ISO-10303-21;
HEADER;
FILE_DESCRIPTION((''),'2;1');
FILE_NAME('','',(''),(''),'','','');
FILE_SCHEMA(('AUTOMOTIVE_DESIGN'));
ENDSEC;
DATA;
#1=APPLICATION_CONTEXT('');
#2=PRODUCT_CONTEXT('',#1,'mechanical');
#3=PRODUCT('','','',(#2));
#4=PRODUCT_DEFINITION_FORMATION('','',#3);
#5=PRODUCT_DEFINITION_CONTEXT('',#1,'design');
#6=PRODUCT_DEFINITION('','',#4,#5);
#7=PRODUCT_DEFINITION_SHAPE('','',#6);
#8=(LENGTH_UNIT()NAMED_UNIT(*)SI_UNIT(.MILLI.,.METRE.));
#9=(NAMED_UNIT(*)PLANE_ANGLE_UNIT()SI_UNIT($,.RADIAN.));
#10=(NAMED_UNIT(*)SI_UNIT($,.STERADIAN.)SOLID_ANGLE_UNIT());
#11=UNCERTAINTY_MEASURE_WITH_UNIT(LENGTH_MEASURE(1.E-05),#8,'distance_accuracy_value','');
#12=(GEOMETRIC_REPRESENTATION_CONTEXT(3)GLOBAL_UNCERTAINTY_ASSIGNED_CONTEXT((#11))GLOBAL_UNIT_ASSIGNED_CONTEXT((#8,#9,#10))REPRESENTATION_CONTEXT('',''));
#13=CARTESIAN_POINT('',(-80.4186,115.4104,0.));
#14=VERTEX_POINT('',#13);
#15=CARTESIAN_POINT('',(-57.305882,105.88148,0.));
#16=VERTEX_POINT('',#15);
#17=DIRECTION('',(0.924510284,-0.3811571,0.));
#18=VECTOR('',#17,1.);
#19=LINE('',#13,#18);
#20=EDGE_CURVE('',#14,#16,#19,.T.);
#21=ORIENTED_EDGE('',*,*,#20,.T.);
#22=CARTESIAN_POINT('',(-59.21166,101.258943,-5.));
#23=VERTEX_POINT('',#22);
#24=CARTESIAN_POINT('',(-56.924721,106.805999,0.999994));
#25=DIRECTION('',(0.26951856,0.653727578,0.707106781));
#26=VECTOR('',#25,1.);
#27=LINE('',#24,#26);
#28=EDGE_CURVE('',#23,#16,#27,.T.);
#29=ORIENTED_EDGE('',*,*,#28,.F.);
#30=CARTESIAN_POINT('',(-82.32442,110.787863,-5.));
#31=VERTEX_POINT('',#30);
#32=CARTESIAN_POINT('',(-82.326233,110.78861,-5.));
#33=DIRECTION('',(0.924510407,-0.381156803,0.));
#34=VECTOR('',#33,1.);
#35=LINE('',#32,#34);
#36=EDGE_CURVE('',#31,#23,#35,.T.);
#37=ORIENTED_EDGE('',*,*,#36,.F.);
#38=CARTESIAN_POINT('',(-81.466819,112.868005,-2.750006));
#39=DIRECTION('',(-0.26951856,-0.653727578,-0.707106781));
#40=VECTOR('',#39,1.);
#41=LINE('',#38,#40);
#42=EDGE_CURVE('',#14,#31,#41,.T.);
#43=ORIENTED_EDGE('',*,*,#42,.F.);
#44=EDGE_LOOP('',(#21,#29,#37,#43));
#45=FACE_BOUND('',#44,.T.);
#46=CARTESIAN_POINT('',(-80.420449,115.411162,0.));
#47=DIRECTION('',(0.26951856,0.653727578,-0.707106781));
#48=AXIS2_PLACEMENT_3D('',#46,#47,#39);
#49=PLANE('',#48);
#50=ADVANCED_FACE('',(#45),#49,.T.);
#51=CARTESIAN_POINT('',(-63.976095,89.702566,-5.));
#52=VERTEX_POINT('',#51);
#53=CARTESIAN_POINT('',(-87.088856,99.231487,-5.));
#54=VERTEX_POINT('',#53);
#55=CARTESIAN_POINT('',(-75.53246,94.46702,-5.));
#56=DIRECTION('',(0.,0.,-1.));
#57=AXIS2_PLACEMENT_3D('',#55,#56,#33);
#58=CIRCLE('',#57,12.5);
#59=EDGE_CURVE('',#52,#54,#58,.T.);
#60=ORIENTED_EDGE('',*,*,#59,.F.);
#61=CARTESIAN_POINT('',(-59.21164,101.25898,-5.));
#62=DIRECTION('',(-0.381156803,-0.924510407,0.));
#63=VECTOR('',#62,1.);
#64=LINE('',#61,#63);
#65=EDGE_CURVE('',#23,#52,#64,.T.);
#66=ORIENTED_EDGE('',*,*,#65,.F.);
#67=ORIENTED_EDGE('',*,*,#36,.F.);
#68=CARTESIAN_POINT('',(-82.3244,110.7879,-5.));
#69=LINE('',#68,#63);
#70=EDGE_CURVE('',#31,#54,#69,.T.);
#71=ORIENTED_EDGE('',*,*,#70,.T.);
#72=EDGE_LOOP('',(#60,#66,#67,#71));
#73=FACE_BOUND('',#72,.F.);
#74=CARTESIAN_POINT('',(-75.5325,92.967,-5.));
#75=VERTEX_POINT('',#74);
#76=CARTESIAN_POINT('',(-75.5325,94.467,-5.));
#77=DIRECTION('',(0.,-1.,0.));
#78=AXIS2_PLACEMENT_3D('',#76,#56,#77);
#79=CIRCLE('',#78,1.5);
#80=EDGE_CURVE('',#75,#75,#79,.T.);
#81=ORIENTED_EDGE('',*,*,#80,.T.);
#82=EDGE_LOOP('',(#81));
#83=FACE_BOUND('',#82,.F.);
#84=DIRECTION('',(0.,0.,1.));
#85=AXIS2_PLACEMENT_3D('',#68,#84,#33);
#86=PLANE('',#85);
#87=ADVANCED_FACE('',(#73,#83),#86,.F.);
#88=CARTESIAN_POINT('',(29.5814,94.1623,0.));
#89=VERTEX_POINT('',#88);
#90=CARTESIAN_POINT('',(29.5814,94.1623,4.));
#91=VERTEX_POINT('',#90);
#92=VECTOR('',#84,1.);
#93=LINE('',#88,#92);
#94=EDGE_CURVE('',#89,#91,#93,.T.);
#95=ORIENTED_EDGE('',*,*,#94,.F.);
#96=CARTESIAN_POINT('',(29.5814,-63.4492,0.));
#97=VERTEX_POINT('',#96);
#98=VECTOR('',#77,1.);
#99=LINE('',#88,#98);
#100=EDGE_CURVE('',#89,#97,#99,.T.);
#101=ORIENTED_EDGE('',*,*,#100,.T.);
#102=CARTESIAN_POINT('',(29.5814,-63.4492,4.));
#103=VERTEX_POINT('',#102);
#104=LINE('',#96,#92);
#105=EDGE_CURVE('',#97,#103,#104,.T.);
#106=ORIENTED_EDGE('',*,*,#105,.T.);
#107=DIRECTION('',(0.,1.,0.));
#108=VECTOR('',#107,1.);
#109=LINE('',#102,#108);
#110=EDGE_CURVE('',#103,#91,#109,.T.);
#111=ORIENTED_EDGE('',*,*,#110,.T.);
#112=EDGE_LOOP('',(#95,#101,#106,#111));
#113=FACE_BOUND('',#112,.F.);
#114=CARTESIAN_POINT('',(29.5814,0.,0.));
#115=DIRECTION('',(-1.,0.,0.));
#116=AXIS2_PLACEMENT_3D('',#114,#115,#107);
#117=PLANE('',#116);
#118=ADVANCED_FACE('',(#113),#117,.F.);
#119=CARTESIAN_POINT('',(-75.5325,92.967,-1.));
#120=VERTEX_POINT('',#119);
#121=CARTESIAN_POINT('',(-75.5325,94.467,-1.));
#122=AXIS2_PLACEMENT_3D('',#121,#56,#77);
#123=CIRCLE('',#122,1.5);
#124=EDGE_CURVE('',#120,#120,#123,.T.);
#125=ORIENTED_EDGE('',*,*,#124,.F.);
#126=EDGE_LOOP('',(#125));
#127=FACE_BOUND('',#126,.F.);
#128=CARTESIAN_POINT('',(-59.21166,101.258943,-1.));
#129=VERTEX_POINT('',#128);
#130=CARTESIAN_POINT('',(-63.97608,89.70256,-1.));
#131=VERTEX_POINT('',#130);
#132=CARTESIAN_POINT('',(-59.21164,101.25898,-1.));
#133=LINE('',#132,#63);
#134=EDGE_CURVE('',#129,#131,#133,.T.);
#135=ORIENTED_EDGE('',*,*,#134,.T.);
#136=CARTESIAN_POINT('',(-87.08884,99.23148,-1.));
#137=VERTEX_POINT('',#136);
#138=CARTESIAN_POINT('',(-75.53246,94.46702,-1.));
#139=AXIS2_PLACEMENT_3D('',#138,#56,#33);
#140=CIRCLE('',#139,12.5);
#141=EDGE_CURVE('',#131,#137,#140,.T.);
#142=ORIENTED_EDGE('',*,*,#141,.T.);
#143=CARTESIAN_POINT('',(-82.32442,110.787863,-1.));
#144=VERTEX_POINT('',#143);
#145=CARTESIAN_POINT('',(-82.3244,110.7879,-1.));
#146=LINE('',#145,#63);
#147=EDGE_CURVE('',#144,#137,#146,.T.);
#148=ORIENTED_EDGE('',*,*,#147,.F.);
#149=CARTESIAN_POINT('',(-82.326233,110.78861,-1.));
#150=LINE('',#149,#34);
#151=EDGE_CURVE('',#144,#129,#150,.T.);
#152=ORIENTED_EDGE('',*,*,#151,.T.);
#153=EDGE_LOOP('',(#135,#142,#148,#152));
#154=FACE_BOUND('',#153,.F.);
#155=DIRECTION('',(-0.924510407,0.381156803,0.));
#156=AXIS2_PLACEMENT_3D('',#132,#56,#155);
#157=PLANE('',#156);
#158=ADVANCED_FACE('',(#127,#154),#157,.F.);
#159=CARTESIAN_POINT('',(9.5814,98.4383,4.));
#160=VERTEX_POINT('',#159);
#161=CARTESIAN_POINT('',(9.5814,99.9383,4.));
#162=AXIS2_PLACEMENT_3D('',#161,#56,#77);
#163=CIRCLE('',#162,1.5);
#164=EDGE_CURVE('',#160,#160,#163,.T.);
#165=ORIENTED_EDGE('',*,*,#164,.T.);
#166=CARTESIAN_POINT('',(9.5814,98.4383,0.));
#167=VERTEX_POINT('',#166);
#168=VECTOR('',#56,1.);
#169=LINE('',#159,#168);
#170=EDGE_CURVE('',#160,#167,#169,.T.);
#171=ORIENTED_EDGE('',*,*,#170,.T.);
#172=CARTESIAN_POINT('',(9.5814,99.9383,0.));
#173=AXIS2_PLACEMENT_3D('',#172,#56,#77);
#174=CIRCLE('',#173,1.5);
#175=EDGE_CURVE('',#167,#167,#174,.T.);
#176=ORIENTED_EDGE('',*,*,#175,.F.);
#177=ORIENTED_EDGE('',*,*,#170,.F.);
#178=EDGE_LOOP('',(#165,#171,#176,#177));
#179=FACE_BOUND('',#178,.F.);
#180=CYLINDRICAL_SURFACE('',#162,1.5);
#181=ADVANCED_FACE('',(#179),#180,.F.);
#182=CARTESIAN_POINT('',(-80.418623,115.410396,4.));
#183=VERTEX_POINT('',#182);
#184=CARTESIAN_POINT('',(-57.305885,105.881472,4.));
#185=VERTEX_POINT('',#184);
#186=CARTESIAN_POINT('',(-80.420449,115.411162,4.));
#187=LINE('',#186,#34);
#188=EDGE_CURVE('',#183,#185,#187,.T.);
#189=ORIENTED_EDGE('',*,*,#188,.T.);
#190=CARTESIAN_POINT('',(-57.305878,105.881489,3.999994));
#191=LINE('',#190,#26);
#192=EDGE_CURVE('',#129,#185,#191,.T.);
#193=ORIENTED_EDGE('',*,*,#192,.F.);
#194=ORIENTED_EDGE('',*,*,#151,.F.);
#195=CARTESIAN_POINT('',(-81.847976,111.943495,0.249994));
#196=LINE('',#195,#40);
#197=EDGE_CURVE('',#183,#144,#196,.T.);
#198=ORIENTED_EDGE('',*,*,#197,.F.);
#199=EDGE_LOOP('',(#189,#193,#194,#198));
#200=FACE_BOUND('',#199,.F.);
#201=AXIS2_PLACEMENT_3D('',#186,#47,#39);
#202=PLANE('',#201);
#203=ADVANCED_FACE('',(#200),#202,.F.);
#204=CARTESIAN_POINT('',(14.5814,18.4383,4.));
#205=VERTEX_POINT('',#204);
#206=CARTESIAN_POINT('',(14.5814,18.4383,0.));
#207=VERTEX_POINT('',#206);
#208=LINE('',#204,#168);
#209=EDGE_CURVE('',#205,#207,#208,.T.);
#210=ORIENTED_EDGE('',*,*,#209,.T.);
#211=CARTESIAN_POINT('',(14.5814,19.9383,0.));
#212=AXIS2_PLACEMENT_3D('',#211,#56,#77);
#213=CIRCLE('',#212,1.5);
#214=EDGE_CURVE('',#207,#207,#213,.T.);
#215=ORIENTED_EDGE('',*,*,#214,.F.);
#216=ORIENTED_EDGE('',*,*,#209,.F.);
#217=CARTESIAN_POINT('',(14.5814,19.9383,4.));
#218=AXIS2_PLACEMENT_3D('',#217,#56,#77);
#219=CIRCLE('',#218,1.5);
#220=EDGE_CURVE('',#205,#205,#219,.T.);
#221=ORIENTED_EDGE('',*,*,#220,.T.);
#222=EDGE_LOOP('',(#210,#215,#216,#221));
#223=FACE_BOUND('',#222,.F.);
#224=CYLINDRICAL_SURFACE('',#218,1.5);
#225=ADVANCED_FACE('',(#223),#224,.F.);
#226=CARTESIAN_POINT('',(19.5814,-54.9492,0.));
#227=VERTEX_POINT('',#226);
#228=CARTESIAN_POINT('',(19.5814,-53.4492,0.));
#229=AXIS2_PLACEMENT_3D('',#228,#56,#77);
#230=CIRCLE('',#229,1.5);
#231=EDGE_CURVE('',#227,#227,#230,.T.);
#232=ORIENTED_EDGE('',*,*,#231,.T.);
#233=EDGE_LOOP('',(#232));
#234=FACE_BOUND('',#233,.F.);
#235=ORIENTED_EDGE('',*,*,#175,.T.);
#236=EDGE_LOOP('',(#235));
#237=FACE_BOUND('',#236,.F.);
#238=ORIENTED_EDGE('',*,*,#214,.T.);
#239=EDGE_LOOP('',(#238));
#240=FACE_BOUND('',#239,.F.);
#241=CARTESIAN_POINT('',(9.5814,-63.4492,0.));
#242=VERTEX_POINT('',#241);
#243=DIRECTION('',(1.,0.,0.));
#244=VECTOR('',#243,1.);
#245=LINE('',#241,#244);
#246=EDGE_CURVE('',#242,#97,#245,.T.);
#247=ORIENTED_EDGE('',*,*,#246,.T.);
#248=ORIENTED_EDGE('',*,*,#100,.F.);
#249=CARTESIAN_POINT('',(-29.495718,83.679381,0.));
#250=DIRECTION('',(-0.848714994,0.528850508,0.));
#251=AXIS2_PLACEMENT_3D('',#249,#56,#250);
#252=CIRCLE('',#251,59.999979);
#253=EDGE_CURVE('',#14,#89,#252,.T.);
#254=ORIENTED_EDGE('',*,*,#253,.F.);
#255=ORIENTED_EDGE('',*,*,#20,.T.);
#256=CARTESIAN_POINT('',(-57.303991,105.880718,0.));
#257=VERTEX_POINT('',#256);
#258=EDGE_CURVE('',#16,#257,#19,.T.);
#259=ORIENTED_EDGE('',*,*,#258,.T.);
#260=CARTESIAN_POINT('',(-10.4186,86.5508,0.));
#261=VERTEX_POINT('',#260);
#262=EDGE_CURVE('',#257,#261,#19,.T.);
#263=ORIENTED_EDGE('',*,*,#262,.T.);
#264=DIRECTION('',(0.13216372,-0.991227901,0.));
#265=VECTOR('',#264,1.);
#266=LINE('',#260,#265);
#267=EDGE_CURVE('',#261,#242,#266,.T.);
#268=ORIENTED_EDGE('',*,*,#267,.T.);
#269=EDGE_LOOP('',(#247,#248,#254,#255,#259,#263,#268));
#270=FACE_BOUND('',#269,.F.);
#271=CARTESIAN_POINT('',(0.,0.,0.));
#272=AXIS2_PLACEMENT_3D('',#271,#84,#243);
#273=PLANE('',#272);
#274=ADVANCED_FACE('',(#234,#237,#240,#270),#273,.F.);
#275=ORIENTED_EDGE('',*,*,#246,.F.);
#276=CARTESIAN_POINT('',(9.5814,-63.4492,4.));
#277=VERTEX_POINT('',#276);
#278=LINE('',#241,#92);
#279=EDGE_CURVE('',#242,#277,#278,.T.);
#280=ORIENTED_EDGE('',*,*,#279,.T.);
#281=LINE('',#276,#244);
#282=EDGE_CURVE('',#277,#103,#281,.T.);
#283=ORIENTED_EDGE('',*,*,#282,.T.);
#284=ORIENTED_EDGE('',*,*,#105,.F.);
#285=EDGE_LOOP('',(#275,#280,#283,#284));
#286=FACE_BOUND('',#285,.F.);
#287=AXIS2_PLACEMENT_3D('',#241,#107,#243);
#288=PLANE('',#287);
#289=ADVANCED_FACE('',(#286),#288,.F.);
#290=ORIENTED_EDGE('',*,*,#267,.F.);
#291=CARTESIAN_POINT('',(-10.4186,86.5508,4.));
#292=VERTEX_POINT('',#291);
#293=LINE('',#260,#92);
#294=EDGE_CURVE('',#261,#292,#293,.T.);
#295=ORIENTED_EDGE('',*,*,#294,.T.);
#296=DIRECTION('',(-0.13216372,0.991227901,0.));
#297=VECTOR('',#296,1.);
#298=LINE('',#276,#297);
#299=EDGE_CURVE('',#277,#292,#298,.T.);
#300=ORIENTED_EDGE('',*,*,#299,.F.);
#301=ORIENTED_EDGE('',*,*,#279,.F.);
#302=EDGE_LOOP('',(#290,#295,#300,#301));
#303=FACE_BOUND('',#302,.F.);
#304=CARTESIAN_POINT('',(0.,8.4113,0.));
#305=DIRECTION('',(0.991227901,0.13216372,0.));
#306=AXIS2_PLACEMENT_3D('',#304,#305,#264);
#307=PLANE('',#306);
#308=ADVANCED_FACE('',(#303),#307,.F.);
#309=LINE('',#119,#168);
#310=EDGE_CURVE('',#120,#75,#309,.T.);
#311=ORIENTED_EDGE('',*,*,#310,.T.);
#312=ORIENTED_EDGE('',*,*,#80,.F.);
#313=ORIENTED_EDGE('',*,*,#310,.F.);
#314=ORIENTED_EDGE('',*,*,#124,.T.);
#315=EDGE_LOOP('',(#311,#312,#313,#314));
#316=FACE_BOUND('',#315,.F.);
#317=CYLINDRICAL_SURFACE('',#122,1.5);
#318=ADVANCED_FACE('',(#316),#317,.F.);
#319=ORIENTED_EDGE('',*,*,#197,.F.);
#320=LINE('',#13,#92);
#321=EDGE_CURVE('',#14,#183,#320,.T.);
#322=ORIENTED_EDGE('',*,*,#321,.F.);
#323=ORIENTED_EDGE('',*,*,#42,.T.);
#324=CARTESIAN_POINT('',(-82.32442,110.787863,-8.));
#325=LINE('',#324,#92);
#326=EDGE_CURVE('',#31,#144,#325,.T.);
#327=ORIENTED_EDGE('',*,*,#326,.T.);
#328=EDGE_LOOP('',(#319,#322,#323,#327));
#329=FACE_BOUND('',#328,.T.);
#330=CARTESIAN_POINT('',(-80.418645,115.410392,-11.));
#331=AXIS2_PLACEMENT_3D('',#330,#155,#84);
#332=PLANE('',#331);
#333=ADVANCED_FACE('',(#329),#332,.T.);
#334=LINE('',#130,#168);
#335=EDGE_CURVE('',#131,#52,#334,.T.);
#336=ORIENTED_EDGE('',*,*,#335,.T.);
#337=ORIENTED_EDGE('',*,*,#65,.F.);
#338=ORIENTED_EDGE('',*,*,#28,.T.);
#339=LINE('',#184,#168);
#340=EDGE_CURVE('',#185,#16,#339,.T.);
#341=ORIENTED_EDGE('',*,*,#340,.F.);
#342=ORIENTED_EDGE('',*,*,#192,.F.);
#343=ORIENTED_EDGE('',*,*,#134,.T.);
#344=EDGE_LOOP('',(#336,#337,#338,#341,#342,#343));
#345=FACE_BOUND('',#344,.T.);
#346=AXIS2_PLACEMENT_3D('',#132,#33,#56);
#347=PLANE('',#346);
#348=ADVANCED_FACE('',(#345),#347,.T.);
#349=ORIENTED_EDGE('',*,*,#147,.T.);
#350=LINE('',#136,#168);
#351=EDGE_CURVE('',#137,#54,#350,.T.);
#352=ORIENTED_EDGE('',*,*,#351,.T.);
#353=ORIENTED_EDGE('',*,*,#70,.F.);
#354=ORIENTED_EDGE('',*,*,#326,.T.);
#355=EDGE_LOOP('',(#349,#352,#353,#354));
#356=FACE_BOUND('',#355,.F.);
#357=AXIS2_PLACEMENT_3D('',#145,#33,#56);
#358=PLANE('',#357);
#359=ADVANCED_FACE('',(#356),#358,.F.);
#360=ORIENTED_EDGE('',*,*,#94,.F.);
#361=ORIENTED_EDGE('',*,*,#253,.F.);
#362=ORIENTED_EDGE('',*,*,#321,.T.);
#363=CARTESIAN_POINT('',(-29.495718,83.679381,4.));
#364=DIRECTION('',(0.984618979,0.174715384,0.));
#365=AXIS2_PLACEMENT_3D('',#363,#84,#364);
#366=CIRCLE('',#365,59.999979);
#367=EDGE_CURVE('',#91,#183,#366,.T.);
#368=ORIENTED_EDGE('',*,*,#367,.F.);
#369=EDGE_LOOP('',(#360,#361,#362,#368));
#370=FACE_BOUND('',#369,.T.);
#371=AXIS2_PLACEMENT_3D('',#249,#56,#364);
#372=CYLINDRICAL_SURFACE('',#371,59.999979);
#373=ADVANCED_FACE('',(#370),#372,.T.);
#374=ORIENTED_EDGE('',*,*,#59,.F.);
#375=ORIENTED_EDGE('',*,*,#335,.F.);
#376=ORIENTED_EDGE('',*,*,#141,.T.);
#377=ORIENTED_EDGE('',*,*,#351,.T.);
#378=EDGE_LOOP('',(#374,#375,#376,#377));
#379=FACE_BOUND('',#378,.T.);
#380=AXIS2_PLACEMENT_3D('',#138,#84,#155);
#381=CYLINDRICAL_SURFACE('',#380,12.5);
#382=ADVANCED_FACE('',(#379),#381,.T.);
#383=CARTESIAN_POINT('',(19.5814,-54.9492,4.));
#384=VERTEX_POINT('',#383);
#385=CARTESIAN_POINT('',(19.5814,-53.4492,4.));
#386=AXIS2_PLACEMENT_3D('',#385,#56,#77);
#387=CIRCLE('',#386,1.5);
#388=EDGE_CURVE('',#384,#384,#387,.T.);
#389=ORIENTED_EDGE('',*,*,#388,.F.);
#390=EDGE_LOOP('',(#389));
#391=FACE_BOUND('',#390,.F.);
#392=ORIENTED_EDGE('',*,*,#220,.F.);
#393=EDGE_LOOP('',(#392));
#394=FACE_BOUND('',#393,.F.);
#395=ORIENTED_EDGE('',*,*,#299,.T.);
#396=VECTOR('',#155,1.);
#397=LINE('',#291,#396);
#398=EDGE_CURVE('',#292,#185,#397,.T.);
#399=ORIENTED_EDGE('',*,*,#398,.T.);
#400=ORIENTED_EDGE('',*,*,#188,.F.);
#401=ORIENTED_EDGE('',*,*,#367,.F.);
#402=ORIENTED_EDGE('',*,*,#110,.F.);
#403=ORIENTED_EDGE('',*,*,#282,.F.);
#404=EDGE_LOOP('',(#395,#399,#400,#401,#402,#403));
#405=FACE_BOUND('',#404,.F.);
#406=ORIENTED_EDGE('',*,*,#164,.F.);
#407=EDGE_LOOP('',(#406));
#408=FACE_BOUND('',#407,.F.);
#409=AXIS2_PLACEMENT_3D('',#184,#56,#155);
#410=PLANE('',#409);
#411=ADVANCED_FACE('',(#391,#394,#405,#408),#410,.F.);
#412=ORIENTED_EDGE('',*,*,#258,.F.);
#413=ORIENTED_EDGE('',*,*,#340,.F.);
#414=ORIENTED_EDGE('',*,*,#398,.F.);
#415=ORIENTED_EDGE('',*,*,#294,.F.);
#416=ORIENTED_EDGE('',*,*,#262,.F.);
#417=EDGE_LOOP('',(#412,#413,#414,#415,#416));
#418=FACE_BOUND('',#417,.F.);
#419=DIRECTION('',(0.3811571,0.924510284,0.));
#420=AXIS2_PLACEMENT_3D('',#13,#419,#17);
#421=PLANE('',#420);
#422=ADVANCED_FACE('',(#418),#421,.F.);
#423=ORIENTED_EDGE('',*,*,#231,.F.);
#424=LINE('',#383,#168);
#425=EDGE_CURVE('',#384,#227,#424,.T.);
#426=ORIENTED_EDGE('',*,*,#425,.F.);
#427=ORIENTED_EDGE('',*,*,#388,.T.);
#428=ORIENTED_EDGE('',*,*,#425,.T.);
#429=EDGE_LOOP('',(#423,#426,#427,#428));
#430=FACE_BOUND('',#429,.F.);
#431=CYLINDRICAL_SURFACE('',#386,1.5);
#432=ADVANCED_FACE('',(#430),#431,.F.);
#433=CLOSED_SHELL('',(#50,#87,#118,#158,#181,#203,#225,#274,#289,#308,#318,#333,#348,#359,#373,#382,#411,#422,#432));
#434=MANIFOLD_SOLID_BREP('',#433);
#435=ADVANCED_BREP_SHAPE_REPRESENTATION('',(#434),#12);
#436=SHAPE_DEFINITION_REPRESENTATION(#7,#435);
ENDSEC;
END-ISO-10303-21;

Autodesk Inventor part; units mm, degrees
ref_plane "YZ Plane" through (0, 0, 0) normal (1, 0, 0) x (0, 1, 0)
ref_plane "XZ Plane" through (0, 0, 0) normal (0, 1, 0) x (-1, 0, 0)
ref_plane "XY Plane" through (0, 0, 0) normal (0, 0, 1) x (1, 0, 0)
sketch "Skizze1" plane through (0, 0, 0) normal (0, 0, 1) x (1, 0, 0)
  line L0 (-103.8791, 0) -> (60.3442, 0) projected
  line L1 (0, -106.7819) -> (0, 196.5471) projected
  line L2 (29.5814, -63.4492) -> (29.5814, 94.1623)
  arc A0 (29.5814, 94.1623) -> (-80.4186, 115.4104) centre (-29.4958, 83.6793) ccw
  line L3 (-80.4186, 115.4104) -> (-10.4186, 86.5508)
  line L4 (-10.4186, 86.5508) -> (9.5814, -63.4492)
  line L5 (9.5814, -63.4492) -> (29.5814, -63.4492)
  point P0 (0, 0)
  point P1 (-57.3059, 105.8815)
  dimension "d0" = 120
  dimension "d2" = 20
  dimension "d3" = 40
  dimension "d4" = 120
  dimension "d6" = 150
  dimension "d24" = 70
extrude "Extrusion1" add sketch "Skizze1" along normal blind 4 contours L4 L1 A0 L2 L0 | L0 L2 L5 L4 | L4 L3 A0 L1
sketch "Skizze2" plane through (0, 0, 4) normal (0, 0, 1) x (1, 0, 0)
  arc A0 (-82.3244, 110.7879) -> (-59.2117, 101.2589) centre (-70.768, 106.0234) ccw projected
  line L0 (29.5814, -63.4492) -> (29.5814, 94.1623) projected
  line L1 (9.5814, -63.4492) -> (29.5814, -63.4492) projected
  point P0 (0, 0)
  point P1 (19.5814, -53.4492)
  dimension "d15" = 10
  dimension "d16" = 10
hole "Bohrung1" at (19.5814, -53.4492, 4) direction (0, 0, -1) diameter 3 end through all
sketch "Skizze3" plane through (-10.4186, 86.5508, 0) normal (-0.3811568, -0.9245104, 0) x (0.9245104, -0.3811568, 0)
  line L0 (34.0793, 4) -> (-75.7158, 4) projected
  line L1 (-75.7158, 4) -> (-50.7158, 4)
  line L2 (-50.7158, 4) -> (-50.7158, -11)
  line L3 (-50.7158, -11) -> (-75.7158, -11)
  line L4 (-75.7158, -11) -> (-75.7158, 4)
  point P0 (42.6216, 0)
  dimension "d25" = 15
  dimension "d26" = 25
extrude "Extrusion2" add sketch "Skizze3" along normal blind 10
sketch "Skizze4" plane through (-80.4186, 115.4104, -11) normal (-0.9245104, 0.3811568, 0) x (0, 0, 1)
  line L0 (11, 0) -> (11, 50.0739) projected
  line L1 (0, 0) -> (0, -10) projected
  line L2 (11, 0) -> (0, 0) projected
  line L3 (11, 0) -> (15, 0) projected
  line L4 (0, -10) -> (15, -10) projected
  line L5 (11, 0) -> (6, -5)
  line L6 (15, 0) -> (15, -10) projected
  line L7 (15, 0) -> (10, -5)
  line L8 (6, -5) -> (10, -5)
  point P0 (11, -76.046)
  point P1 (11, 22.2831)
  dimension "d30" = 5
  dimension "d31" = 5
  dimension "d32" = 45
extrude "Extrusion3" cut sketch "Skizze4" against normal blind 25 contours L2 L5 L8 L7 L6 L4 L1
sketch "Skizze5" plane through (-82.3244, 110.7879, -5) normal (-0.3811568, -0.9245104, 0) x (0.9245104, -0.3811568, 0)
  point P0 (118.3373, 5)
sketch "Skizze6" plane through (-82.3244, 110.7879, -5) normal (-0.3811568, -0.9245104, 0) x (0.9245104, -0.3811568, 0)
  point P0 (118.3373, 5)
sketch "Skizze7" plane through (-82.3244, 110.7879, -5) normal (-0.3811568, -0.9245104, 0) x (0.9245104, -0.3811568, 0)
  point P0 (118.3373, 5)
sketch "Skizze8" plane through (-82.3244, 110.7879, -5) normal (-0.3811568, -0.9245104, 0) x (0.9245104, -0.3811568, 0)
  line L0 (25, 4) -> (25, 0) projected
  line L1 (0, 0) -> (25, 0)
  line L2 (25, 0) -> (25, 4)
  line L3 (25, 4) -> (0, 4)
  line L4 (0, 4) -> (0, 0)
  point P0 (118.3373, 5)
  point P1 (25, 0)
extrude "Extrusion4" add sketch "Skizze8" along normal blind 25
sketch "Skizze9" plane through (-91.8533, 87.6751, -1) normal (0, 0, 1) x (0.9245104, -0.3811568, 0)
  arc A0 (0, 12.5) -> (25, 12.5) centre (12.5, 12.5) ccw
  line L0 (0, 25) -> (0, 0) projected
  line L1 (25, 0) -> (0, 0) projected
  line L2 (25, 25) -> (25, 0) projected
  line L3 (25, 12.5) -> (25, 0)
  line L4 (0, 0) -> (0, 12.5)
  point P0 (118.3373, -46.046)
  point P1 (12.5, 0)
  dimension "d37" = 25
  dimension "d38" = 12.5
extrude "Extrusion5" cut sketch "Skizze9" against normal blind 30
sketch "Skizze10" plane through (-82.3244, 110.7879, -1) normal (0, 0, 1) x (0.9245104, -0.3811568, 0)
  arc A0 (0, -12.5) -> (25, -12.5) centre (12.5, -12.5) ccw projected
  point P0 (118.3373, -71.046)
  point P1 (12.5, -12.5)
  dimension "d41" = 0
  dimension "d42" = 0
hole "Bohrung2" at (-75.5325, 94.467, -1) direction (0, 0, -1) diameter 3 end through all
sketch "Skizze12" plane through (0, 0, 4) normal (0, 0, 1) x (1, 0, 0)
  line L0 (-57.3059, 105.8815) -> (-10.4186, 86.5508) projected
  line L1 (29.5814, -63.4492) -> (29.5814, 94.1623) projected
  point P0 (0, 0)
  point P1 (9.5814, 99.9383)
  point P2 (14.5814, 19.9383)
  dimension "d63" = 20
  dimension "d64" = 20
  dimension "d65" = 80
  dimension "d66" = 15
hole "Bohrung4" at (9.5814, 99.9383, 4) at (14.5814, 19.9383, 4) direction (0, 0, -1) diameter 3 end through all
properties part number "Halterung hinten oben"
